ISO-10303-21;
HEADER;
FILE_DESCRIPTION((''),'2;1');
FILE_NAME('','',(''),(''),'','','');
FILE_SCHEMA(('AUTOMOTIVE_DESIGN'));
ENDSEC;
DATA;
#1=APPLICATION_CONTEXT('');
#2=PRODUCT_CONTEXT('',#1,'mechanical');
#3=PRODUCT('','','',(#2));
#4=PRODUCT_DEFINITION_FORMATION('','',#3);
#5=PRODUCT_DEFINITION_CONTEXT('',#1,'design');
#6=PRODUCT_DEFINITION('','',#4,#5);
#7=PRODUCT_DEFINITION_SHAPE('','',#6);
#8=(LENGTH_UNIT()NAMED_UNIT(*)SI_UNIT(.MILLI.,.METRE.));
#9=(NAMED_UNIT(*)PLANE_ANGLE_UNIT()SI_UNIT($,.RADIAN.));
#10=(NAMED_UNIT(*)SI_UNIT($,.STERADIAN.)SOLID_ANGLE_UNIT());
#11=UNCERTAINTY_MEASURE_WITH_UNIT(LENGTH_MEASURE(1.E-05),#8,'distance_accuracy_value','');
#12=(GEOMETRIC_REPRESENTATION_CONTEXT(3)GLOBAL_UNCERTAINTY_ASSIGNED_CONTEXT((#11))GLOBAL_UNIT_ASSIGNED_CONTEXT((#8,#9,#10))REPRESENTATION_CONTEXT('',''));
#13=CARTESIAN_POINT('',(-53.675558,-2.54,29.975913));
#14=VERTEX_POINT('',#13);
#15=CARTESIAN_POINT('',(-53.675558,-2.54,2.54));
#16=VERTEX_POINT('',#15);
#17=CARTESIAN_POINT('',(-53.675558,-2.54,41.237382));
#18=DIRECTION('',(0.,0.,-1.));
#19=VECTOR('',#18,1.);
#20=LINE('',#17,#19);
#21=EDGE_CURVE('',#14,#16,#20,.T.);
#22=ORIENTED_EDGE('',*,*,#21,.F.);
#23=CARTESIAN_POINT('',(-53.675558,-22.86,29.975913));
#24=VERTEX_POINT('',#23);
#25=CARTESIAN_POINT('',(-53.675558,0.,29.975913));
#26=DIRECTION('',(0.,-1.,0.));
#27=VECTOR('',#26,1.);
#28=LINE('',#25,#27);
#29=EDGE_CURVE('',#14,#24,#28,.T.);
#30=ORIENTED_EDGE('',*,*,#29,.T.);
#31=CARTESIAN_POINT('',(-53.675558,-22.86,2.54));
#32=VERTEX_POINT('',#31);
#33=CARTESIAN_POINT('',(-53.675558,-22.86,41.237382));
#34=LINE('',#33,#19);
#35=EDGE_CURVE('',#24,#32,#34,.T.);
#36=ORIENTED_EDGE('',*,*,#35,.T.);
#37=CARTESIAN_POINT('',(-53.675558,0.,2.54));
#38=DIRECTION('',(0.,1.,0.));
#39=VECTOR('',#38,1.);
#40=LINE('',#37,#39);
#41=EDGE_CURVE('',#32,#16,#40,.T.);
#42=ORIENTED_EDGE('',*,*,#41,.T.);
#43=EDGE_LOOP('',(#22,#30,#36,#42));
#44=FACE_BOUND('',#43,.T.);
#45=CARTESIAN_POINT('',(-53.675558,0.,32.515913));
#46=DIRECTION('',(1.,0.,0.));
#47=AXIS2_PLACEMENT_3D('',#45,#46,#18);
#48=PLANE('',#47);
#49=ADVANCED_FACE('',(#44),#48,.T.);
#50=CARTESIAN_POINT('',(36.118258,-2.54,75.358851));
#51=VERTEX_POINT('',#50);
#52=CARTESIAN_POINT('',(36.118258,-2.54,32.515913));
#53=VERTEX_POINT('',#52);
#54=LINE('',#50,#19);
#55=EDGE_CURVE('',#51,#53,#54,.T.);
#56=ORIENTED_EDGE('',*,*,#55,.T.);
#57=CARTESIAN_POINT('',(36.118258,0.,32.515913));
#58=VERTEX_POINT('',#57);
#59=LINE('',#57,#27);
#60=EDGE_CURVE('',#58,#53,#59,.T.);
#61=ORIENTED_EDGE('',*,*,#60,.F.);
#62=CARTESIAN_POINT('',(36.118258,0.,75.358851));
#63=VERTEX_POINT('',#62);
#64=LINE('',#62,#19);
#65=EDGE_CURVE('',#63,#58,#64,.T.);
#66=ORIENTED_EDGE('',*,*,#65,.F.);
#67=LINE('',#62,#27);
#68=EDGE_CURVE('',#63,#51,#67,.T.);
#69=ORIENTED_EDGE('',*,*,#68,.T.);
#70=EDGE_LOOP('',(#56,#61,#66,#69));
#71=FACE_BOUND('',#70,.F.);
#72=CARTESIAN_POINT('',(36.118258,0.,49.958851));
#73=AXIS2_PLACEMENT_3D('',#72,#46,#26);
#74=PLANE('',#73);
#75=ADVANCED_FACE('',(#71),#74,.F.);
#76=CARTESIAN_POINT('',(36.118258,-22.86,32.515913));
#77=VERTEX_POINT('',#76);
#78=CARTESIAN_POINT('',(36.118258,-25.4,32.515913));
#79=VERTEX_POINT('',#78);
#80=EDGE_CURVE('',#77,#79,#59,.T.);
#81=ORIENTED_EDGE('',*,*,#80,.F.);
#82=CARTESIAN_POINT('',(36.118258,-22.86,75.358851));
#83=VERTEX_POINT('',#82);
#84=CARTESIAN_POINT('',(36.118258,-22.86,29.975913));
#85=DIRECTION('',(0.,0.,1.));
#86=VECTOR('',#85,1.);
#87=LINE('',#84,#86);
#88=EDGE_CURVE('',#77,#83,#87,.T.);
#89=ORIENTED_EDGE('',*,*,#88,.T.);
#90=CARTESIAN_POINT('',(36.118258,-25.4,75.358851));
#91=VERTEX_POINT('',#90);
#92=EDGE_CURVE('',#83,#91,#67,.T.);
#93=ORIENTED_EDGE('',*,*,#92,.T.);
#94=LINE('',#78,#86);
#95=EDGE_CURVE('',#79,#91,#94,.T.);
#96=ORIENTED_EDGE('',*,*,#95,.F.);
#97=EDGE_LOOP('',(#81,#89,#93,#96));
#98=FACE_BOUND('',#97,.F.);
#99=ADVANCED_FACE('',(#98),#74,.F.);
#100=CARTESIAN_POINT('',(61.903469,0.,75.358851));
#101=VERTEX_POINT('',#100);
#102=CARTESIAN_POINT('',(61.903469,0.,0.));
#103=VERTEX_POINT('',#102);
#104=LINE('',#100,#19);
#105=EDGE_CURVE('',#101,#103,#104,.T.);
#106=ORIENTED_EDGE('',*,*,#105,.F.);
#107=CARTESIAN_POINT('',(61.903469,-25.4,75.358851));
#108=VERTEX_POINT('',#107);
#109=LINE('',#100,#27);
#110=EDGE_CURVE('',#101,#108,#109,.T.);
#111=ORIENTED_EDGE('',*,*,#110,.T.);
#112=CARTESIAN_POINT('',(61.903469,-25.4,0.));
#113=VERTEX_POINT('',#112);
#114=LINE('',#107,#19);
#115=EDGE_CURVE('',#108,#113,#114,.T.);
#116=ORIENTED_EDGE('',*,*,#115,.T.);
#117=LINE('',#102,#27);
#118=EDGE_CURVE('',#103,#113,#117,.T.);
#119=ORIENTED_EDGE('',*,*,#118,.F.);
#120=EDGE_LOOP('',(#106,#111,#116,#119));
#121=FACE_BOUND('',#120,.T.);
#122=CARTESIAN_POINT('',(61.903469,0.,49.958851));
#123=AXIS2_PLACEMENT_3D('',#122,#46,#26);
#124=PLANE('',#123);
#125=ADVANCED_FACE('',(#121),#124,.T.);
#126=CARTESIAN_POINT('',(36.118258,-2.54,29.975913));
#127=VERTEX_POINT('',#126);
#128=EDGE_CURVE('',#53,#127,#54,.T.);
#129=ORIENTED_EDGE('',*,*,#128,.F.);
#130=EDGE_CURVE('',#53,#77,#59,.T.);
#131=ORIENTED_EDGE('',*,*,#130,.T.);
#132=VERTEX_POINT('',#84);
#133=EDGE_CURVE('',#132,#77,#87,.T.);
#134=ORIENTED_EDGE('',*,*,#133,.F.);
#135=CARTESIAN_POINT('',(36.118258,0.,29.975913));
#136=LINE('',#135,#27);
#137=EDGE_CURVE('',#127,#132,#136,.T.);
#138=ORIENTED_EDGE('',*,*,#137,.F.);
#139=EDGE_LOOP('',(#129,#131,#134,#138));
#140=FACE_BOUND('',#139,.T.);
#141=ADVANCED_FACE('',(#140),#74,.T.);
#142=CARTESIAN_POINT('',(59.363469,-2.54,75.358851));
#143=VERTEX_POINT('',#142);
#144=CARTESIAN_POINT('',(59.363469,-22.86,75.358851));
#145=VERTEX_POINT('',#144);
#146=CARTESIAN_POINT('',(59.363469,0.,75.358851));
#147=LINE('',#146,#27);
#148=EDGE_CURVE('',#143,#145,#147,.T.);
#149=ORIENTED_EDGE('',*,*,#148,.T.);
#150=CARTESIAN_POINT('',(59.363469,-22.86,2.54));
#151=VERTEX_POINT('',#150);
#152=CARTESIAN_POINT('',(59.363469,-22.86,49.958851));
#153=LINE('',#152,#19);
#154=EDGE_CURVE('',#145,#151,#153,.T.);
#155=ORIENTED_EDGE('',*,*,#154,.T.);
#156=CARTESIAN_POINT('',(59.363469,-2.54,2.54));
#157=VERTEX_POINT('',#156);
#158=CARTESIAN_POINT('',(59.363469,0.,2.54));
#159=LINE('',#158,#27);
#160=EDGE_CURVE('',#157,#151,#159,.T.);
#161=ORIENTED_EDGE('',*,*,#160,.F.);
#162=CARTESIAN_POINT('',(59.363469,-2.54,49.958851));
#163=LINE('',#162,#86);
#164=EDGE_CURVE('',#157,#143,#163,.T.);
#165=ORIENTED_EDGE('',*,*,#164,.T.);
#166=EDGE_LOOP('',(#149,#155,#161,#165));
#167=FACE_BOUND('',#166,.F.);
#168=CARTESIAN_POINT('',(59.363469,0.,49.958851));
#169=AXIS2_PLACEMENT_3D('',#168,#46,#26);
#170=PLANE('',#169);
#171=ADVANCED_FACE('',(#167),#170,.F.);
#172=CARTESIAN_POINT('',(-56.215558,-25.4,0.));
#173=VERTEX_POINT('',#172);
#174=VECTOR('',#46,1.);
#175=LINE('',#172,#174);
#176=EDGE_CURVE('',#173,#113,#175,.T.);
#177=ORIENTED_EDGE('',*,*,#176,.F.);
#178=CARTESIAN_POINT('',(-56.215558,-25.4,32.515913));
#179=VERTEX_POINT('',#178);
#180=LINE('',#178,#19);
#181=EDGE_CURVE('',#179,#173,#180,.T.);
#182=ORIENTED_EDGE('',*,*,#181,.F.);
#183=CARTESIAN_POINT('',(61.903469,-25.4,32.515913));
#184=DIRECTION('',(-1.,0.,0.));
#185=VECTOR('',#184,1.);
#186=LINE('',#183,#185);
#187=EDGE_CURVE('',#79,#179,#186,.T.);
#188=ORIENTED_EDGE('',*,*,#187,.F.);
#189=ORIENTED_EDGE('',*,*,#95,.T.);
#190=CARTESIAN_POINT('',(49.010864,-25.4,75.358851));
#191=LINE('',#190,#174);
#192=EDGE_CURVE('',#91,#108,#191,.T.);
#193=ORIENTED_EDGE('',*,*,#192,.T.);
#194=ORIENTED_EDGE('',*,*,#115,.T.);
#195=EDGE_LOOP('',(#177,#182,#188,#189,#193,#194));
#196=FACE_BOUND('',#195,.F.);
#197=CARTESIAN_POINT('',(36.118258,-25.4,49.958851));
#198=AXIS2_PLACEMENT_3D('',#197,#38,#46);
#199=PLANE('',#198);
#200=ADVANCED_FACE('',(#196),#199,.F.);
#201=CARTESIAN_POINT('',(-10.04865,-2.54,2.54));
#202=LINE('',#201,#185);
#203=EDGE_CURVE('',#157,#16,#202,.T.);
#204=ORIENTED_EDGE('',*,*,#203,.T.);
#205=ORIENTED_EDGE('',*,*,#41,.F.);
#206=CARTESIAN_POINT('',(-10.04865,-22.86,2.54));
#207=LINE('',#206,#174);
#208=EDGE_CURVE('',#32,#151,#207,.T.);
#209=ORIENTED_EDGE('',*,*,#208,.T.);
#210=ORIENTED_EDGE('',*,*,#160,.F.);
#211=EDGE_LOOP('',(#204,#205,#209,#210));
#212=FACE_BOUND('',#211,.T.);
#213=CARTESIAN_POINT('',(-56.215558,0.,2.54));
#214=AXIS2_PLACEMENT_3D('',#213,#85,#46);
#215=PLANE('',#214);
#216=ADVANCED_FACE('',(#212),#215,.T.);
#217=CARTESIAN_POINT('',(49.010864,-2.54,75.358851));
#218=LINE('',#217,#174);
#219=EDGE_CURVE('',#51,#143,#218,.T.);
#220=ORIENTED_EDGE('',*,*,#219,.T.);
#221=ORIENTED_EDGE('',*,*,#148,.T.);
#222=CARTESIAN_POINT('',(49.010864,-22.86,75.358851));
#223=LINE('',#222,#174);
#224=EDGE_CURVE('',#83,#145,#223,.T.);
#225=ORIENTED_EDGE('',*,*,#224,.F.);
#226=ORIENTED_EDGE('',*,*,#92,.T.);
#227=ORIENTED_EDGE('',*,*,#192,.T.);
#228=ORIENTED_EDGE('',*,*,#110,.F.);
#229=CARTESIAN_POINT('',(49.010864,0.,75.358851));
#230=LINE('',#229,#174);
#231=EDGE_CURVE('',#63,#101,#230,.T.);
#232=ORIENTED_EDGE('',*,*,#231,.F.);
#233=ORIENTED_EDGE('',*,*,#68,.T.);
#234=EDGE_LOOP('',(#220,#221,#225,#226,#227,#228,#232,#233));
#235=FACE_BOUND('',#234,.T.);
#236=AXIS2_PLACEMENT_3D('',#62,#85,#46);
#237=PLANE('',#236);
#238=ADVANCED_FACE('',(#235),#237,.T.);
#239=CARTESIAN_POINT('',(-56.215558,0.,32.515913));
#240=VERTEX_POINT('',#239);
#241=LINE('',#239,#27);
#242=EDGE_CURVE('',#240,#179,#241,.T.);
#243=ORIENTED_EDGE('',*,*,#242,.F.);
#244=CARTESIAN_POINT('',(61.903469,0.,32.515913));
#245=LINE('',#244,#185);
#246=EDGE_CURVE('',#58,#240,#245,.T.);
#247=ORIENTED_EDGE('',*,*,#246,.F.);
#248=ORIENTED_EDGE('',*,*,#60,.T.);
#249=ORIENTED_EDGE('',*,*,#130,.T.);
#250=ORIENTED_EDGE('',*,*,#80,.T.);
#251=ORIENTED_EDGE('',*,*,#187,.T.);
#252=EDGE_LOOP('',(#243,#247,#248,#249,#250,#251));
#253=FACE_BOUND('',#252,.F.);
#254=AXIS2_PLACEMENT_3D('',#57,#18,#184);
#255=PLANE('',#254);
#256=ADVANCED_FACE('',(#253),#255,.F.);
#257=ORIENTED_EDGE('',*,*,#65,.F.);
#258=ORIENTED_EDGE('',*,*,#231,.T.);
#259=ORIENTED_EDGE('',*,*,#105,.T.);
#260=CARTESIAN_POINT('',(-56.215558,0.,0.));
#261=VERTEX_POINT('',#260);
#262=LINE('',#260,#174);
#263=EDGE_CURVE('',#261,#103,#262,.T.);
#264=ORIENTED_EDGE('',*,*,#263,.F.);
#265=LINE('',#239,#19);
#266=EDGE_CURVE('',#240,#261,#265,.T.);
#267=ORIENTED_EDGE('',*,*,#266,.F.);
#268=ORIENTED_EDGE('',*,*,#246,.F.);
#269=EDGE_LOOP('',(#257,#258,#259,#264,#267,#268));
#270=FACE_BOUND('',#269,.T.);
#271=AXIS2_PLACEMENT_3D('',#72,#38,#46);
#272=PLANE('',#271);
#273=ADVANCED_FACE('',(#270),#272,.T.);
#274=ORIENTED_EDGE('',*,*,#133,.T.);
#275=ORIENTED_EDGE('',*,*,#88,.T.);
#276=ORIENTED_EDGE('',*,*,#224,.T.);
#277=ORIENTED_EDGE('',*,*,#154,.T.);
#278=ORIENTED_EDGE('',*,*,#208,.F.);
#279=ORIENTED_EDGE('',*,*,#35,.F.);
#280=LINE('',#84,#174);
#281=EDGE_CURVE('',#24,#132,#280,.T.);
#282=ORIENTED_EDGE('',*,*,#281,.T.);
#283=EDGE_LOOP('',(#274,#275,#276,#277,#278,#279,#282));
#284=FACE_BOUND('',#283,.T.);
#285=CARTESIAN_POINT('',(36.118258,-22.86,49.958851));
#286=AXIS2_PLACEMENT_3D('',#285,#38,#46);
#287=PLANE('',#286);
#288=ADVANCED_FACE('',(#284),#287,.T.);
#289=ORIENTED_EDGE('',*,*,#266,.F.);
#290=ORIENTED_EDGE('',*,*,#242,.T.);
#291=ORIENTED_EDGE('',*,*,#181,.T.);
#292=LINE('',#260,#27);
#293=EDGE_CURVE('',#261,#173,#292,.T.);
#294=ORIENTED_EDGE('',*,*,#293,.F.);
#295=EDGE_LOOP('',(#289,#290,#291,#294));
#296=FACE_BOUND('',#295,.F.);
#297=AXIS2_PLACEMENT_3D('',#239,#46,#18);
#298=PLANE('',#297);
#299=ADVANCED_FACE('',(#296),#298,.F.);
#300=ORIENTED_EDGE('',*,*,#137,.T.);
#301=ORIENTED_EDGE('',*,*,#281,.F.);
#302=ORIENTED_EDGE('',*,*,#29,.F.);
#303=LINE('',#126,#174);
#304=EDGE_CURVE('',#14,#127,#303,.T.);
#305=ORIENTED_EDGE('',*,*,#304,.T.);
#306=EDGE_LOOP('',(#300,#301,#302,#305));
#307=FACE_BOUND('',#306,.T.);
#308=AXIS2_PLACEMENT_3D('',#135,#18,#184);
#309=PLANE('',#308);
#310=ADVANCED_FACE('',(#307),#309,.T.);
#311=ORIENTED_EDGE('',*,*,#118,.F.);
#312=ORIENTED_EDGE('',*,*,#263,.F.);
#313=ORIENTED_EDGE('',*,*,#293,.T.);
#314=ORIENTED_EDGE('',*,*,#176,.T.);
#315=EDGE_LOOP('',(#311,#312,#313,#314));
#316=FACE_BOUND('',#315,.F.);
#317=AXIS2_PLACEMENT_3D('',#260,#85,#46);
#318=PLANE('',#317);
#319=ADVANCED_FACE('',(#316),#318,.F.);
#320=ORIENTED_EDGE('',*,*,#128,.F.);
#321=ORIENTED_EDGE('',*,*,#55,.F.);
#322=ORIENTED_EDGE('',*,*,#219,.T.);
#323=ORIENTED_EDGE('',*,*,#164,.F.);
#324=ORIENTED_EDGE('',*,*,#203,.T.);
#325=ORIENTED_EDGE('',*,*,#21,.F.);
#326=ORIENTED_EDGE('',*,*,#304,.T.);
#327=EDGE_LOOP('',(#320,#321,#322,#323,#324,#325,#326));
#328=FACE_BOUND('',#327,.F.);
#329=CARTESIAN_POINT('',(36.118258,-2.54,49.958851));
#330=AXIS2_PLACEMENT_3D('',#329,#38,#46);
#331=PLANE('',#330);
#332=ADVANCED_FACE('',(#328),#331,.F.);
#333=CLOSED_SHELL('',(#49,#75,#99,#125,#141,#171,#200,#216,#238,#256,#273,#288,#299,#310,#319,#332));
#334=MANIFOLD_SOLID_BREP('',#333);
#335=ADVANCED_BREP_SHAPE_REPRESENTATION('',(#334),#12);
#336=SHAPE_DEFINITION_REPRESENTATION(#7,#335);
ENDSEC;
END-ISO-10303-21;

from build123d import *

# Parameters (mm, degrees)
F0_W     = 25.7852114737
F0_H     = 17.4429379404
F1_DEPTH = 25.4
F2_DEPTH = 25.4
F3_T     = 2.54


# Not quite as in the source:
# - a shell that OpenCascade refuses in one call is made with other operations: the cavity is built on its own and cut out


with BuildPart() as f1:
    # F0 (on Front) → F1 (new body)
    with BuildSketch(Plane.XZ):
        Polygon((36.1182577908, 32.5159132481), (-56.2155582011, 32.5159132481), (-56.2155582011, 0), (61.9034692645, 0), (61.9034692645, 32.5159132481), align=None)
        with Locations((49.0108635277, 41.2373822182)):
            Rectangle(F0_W, F0_H)
    extrude(amount=F1_DEPTH)

    # F2 (add): a face of the model
    f2_faces = [f1.faces().sort_by_distance(p)[0] for p in [
        (49.0108635277, -12.7, 49.9588511884),
    ]]
    extrude(f2_faces, amount=F2_DEPTH)

    # F3: shell of thickness 2.54, made by hand


with BuildPart() as f3_core1:
    # F3_t2: copy of F1
    add(f1.part)

    # the walls: a layer under each face that stays
    f3_faces = [f3_core1.faces().sort_by_distance(p)[0] for p in [
        (-10.0486502051, -12.7, 32.5159132481),
        (-36.5290536235, -25.4, 12.5598085314),
        (61.9034692645, -12.7, 37.6794255942),
        (2.8439555317, -12.7, 0),
        (-36.5290536235, 0, 12.5598085314),
        (-56.2155582011, -12.7, 16.257956624),
    ]]
    thicken(f3_faces, amount=-F3_T, mode=Mode.SUBTRACT)


with BuildPart() as f1_1:
    add(f1.part)

    # what is left inside the walls is the cavity
    f3_cavity = [f3_core1.part.solids().sort_by_distance(p)[0] for p in [
        (2.843956, -2.5654, 26.81295),
    ]]
    add(f3_cavity, mode=Mode.SUBTRACT)


solid = f1_1.part
